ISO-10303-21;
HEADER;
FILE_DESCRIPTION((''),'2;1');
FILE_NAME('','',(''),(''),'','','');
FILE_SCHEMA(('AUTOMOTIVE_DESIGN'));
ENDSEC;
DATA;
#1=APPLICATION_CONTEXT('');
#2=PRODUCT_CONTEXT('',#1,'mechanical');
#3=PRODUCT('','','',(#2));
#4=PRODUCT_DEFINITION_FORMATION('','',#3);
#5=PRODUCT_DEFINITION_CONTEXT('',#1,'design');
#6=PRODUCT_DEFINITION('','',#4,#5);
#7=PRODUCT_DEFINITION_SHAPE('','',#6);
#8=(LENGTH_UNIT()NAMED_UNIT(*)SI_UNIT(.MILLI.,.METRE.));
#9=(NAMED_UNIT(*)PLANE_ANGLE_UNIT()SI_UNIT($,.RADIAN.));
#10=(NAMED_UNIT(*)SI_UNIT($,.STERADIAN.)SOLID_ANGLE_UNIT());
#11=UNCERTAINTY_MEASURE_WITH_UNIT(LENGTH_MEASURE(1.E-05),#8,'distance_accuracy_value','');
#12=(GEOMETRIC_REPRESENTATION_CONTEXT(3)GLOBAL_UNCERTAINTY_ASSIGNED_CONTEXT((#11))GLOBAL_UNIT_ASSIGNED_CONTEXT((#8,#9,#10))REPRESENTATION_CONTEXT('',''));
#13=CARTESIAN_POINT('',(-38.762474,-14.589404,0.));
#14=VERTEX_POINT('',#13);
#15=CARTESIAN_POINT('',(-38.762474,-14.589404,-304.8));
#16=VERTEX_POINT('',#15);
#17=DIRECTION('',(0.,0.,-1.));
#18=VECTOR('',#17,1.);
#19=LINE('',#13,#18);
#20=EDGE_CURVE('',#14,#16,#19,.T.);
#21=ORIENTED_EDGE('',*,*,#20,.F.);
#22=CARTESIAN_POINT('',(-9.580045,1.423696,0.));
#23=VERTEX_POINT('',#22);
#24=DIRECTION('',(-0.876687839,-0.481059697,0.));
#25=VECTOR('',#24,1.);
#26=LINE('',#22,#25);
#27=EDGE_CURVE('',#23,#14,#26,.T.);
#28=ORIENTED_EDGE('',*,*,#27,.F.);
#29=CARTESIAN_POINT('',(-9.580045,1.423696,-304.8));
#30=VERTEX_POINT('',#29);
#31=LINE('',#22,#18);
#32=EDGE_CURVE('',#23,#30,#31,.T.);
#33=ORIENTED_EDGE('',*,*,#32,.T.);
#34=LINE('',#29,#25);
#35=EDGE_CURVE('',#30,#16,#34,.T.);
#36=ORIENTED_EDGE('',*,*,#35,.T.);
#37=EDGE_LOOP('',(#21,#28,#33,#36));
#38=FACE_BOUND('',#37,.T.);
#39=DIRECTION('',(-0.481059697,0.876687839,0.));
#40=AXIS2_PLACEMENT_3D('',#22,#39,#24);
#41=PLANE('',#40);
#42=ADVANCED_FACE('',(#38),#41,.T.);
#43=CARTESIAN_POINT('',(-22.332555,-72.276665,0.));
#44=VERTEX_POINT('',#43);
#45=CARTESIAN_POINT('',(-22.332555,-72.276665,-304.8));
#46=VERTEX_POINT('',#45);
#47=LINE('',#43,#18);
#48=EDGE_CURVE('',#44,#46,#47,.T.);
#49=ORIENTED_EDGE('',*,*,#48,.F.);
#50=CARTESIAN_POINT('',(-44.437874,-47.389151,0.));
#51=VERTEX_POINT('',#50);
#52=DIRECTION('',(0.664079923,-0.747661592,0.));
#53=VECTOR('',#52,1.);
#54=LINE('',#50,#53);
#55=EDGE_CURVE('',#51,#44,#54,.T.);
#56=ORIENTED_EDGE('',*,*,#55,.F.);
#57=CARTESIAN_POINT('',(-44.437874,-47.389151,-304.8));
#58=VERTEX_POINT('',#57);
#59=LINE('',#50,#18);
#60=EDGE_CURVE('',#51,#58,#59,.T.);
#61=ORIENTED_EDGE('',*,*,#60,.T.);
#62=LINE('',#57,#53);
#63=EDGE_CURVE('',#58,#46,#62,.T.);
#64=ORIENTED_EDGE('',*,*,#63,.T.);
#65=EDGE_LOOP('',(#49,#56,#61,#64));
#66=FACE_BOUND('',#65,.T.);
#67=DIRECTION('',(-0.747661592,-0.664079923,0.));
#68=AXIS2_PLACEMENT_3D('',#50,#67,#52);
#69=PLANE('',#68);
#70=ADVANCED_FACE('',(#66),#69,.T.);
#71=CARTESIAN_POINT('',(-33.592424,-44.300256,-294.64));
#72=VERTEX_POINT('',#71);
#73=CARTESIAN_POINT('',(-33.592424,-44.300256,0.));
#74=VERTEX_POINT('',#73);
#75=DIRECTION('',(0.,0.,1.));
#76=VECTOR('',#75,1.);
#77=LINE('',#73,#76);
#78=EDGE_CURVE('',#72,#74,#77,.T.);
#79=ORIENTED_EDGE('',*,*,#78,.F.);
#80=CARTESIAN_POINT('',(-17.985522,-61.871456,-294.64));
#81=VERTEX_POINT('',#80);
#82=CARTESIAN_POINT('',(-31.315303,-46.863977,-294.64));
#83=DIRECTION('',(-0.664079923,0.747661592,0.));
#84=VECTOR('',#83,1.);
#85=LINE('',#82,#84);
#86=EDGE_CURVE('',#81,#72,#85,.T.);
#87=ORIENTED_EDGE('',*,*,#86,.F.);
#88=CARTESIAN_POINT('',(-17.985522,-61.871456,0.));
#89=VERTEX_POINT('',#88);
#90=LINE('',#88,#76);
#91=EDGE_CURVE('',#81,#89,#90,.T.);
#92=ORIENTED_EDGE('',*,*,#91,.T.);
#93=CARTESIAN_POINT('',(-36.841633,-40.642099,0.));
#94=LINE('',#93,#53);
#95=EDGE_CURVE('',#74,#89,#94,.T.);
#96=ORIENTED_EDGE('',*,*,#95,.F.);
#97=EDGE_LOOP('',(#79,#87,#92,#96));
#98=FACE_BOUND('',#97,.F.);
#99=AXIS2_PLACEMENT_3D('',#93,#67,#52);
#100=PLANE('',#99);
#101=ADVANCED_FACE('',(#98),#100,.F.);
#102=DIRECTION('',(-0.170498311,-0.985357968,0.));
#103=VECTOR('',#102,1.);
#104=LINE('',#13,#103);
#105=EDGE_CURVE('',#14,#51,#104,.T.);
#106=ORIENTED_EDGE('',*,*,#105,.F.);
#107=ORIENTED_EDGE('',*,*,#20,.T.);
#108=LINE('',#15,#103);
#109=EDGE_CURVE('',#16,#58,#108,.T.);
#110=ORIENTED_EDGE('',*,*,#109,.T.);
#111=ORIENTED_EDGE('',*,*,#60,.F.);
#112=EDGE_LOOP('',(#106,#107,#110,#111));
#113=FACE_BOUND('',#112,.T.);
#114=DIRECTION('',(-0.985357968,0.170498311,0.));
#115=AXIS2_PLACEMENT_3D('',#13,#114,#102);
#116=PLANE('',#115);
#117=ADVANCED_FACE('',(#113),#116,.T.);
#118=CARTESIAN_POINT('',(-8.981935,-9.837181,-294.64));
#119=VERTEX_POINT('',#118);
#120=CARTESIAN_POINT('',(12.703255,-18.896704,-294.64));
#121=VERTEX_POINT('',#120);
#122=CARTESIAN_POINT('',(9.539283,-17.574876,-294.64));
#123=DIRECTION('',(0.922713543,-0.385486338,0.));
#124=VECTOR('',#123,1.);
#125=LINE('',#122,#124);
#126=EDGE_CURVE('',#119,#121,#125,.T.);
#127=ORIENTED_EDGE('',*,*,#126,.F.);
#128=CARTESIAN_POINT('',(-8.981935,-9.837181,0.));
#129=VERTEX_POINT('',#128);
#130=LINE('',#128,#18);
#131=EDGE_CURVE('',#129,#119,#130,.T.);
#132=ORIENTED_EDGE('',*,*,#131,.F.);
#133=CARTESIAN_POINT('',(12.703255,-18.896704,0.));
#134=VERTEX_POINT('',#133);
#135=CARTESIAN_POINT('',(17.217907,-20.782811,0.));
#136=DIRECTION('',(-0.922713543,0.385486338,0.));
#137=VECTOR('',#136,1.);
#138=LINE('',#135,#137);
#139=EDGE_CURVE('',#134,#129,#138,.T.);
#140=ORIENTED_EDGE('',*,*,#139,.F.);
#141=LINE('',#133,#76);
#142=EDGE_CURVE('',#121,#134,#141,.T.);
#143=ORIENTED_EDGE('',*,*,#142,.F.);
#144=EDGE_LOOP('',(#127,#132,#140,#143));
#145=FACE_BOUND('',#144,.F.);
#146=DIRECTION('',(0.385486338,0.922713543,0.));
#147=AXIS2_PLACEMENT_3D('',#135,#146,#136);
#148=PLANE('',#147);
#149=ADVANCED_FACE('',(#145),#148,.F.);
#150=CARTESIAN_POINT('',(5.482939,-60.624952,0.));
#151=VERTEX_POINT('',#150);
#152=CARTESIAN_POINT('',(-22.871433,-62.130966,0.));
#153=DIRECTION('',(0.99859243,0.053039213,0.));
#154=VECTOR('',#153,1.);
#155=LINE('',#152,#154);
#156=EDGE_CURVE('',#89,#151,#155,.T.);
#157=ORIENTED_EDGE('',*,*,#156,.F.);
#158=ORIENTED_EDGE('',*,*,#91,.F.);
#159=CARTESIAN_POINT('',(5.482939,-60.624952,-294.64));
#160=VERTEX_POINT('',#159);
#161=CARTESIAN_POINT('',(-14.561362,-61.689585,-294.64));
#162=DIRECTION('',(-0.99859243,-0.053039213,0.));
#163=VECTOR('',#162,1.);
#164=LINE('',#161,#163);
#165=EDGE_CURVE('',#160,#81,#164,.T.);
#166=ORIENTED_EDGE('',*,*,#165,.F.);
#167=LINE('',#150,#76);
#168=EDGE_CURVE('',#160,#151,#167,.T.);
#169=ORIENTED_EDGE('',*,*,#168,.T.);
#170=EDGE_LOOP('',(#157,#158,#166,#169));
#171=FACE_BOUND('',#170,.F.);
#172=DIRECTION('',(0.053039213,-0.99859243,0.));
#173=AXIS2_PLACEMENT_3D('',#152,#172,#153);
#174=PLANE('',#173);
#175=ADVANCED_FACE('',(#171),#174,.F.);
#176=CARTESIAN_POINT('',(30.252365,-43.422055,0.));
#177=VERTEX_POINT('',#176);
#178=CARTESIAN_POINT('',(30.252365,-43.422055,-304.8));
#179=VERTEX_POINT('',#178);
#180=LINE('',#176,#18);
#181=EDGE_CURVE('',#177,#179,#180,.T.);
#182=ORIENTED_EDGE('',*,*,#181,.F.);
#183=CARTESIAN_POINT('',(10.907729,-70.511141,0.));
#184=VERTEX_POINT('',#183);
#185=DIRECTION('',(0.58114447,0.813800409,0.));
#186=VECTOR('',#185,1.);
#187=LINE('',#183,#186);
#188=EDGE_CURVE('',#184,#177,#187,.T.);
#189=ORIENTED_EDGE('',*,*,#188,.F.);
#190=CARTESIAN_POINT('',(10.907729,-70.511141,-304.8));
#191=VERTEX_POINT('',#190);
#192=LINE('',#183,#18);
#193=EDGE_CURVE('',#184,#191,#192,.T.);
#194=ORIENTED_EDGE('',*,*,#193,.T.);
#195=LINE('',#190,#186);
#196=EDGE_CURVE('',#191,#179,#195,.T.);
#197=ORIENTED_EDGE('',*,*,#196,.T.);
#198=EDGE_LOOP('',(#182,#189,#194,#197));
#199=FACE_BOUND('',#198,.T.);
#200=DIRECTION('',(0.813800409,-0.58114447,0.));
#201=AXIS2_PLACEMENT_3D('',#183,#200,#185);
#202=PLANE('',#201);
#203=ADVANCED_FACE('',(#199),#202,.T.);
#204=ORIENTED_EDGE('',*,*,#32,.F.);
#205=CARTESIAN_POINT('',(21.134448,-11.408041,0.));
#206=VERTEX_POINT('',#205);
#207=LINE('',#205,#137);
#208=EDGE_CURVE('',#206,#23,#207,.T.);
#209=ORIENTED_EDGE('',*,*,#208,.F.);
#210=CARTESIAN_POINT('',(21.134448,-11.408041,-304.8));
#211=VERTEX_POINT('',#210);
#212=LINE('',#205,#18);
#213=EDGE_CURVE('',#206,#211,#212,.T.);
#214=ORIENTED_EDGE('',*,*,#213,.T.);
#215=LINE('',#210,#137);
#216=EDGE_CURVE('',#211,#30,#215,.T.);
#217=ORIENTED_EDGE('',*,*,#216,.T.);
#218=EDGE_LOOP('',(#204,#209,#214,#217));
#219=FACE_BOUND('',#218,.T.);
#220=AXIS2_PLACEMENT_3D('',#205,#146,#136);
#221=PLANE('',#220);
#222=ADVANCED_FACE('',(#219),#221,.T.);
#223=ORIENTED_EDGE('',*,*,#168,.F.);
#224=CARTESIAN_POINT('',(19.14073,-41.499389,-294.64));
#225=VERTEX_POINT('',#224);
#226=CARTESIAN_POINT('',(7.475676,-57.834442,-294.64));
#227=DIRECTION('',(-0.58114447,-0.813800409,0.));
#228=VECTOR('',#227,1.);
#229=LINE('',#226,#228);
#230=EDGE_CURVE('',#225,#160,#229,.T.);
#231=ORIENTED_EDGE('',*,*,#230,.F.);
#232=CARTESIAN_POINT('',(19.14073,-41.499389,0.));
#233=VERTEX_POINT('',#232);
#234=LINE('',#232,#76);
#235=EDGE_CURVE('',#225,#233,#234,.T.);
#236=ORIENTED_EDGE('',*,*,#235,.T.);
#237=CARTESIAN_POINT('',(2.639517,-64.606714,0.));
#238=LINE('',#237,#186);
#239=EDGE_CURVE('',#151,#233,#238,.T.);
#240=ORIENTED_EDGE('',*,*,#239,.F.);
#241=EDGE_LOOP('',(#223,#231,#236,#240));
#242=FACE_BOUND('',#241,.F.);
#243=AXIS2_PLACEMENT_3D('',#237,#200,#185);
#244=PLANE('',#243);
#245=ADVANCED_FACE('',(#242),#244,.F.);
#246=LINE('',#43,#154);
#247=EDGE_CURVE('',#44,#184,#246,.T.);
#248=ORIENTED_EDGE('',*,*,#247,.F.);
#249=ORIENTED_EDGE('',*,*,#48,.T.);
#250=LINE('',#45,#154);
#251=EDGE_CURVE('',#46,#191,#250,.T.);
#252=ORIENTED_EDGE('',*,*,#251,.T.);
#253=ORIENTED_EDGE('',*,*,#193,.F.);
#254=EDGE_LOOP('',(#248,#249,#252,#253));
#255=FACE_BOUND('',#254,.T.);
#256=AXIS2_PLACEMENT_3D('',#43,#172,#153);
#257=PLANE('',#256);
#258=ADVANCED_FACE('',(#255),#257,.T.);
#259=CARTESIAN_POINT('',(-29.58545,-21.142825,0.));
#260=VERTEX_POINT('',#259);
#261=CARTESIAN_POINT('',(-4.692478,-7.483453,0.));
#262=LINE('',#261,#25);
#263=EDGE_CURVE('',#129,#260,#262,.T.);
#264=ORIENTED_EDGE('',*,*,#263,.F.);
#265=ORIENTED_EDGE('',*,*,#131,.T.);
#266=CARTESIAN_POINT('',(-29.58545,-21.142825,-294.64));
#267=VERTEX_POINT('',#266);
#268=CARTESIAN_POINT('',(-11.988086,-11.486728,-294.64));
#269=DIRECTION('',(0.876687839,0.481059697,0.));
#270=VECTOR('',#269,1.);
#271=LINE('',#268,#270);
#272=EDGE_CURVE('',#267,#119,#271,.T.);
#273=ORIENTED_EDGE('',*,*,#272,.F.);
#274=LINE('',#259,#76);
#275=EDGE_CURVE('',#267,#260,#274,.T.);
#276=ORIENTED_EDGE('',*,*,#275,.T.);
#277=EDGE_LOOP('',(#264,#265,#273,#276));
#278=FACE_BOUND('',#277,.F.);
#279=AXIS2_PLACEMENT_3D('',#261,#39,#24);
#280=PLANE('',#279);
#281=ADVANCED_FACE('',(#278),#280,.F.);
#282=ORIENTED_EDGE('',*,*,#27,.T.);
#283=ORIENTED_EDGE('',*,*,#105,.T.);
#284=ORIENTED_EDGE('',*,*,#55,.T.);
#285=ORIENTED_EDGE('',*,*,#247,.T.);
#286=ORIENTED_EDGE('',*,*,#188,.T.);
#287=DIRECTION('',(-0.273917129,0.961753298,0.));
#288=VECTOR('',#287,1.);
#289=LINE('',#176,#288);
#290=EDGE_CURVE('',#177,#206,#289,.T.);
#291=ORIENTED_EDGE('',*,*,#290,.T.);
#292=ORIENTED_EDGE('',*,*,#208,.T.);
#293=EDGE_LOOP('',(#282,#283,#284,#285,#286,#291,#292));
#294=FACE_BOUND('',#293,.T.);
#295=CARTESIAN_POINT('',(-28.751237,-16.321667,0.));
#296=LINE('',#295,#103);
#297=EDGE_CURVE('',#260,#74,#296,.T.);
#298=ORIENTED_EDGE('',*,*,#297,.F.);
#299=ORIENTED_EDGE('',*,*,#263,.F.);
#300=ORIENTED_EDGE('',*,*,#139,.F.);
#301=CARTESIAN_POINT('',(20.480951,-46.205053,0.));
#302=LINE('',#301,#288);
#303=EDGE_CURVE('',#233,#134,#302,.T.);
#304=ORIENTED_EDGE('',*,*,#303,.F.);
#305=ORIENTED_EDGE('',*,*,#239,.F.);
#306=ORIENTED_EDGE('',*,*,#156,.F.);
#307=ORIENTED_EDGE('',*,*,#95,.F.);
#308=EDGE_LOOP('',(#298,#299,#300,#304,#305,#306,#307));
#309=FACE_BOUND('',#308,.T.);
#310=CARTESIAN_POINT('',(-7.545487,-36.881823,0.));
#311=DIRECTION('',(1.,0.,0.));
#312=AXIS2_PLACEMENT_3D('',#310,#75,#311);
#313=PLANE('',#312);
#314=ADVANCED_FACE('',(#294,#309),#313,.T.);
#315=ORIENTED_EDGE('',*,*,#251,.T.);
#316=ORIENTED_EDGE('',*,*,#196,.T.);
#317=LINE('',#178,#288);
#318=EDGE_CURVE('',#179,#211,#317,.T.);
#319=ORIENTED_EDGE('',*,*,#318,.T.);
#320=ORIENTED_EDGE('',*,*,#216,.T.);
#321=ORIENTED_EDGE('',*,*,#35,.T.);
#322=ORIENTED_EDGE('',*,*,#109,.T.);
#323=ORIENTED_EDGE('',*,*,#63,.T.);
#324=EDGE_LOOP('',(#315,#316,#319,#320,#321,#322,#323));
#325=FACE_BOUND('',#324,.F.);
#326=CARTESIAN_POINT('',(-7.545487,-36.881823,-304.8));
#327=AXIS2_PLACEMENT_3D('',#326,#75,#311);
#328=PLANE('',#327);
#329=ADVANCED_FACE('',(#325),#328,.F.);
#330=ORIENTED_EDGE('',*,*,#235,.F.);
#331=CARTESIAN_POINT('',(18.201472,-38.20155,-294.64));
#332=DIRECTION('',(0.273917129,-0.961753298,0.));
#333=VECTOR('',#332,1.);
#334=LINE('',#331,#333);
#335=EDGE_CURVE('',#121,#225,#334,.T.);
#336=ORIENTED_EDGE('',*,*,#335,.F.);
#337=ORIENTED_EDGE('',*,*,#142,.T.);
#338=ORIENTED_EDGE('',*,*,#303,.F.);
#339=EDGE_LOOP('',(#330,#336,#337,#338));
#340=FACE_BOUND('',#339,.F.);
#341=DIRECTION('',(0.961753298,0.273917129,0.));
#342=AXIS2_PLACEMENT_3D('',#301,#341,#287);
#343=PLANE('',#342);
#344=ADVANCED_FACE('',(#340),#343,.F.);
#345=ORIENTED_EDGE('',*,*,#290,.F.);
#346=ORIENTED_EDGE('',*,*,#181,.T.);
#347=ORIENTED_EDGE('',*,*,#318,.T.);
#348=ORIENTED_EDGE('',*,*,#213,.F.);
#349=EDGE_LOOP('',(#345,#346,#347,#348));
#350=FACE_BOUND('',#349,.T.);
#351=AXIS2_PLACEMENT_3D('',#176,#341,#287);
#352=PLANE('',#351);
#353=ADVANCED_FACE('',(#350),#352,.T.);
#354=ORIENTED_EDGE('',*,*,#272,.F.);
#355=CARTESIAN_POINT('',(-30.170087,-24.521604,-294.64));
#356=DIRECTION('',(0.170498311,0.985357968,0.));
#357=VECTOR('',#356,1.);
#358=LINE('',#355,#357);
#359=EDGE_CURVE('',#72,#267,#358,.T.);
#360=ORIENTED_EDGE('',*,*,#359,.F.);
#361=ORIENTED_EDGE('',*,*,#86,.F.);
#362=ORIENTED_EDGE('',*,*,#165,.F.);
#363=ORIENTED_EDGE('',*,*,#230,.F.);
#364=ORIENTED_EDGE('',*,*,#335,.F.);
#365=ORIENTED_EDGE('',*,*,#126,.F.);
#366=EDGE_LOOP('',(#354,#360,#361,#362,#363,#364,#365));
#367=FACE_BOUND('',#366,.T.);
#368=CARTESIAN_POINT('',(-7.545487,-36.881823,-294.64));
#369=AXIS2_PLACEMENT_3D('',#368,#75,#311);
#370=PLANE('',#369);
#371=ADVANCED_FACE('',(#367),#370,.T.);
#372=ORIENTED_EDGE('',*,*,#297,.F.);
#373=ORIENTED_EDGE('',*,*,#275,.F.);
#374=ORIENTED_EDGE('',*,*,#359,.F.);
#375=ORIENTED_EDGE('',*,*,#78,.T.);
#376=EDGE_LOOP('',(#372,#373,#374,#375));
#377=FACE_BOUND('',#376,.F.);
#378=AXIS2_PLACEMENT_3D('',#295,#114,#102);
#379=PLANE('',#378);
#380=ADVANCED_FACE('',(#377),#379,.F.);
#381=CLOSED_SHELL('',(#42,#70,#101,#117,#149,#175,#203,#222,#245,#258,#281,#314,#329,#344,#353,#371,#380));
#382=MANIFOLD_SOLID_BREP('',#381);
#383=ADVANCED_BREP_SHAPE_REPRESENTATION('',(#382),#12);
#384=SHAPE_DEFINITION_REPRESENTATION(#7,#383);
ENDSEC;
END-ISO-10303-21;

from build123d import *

# Parameters (mm, degrees)
F1_DEPTH = 304.8
F2_T     = -10.16


# Not quite as in the source:
# - a length typed as a fraction of an inch, garbled in the dataset ("3 / 203.2 mm" for 3/8 in), is restored


with BuildPart() as f1:
    # F0 (on Top) → F1 (new body)
    with BuildSketch(Plane.XY):
        Polygon((-9.5800449151, 1.4236958328), (-38.7624735933, -14.5894044641), (-44.4378743236, -47.3891506708), (-22.332554599, -72.2766649008), (10.9077289615, -70.5111413261), (30.2523648586, -43.4220552086), (21.1344477032, -11.4080409114), align=None)
    extrude(amount=-F1_DEPTH)

    # F2
    f2_openings = [f1.faces().sort_by_distance(p)[0] for p in [
        (-7.545487, -36.881823, 0),
    ]]
    offset(amount=F2_T, openings=f2_openings)


solid = f1.part
